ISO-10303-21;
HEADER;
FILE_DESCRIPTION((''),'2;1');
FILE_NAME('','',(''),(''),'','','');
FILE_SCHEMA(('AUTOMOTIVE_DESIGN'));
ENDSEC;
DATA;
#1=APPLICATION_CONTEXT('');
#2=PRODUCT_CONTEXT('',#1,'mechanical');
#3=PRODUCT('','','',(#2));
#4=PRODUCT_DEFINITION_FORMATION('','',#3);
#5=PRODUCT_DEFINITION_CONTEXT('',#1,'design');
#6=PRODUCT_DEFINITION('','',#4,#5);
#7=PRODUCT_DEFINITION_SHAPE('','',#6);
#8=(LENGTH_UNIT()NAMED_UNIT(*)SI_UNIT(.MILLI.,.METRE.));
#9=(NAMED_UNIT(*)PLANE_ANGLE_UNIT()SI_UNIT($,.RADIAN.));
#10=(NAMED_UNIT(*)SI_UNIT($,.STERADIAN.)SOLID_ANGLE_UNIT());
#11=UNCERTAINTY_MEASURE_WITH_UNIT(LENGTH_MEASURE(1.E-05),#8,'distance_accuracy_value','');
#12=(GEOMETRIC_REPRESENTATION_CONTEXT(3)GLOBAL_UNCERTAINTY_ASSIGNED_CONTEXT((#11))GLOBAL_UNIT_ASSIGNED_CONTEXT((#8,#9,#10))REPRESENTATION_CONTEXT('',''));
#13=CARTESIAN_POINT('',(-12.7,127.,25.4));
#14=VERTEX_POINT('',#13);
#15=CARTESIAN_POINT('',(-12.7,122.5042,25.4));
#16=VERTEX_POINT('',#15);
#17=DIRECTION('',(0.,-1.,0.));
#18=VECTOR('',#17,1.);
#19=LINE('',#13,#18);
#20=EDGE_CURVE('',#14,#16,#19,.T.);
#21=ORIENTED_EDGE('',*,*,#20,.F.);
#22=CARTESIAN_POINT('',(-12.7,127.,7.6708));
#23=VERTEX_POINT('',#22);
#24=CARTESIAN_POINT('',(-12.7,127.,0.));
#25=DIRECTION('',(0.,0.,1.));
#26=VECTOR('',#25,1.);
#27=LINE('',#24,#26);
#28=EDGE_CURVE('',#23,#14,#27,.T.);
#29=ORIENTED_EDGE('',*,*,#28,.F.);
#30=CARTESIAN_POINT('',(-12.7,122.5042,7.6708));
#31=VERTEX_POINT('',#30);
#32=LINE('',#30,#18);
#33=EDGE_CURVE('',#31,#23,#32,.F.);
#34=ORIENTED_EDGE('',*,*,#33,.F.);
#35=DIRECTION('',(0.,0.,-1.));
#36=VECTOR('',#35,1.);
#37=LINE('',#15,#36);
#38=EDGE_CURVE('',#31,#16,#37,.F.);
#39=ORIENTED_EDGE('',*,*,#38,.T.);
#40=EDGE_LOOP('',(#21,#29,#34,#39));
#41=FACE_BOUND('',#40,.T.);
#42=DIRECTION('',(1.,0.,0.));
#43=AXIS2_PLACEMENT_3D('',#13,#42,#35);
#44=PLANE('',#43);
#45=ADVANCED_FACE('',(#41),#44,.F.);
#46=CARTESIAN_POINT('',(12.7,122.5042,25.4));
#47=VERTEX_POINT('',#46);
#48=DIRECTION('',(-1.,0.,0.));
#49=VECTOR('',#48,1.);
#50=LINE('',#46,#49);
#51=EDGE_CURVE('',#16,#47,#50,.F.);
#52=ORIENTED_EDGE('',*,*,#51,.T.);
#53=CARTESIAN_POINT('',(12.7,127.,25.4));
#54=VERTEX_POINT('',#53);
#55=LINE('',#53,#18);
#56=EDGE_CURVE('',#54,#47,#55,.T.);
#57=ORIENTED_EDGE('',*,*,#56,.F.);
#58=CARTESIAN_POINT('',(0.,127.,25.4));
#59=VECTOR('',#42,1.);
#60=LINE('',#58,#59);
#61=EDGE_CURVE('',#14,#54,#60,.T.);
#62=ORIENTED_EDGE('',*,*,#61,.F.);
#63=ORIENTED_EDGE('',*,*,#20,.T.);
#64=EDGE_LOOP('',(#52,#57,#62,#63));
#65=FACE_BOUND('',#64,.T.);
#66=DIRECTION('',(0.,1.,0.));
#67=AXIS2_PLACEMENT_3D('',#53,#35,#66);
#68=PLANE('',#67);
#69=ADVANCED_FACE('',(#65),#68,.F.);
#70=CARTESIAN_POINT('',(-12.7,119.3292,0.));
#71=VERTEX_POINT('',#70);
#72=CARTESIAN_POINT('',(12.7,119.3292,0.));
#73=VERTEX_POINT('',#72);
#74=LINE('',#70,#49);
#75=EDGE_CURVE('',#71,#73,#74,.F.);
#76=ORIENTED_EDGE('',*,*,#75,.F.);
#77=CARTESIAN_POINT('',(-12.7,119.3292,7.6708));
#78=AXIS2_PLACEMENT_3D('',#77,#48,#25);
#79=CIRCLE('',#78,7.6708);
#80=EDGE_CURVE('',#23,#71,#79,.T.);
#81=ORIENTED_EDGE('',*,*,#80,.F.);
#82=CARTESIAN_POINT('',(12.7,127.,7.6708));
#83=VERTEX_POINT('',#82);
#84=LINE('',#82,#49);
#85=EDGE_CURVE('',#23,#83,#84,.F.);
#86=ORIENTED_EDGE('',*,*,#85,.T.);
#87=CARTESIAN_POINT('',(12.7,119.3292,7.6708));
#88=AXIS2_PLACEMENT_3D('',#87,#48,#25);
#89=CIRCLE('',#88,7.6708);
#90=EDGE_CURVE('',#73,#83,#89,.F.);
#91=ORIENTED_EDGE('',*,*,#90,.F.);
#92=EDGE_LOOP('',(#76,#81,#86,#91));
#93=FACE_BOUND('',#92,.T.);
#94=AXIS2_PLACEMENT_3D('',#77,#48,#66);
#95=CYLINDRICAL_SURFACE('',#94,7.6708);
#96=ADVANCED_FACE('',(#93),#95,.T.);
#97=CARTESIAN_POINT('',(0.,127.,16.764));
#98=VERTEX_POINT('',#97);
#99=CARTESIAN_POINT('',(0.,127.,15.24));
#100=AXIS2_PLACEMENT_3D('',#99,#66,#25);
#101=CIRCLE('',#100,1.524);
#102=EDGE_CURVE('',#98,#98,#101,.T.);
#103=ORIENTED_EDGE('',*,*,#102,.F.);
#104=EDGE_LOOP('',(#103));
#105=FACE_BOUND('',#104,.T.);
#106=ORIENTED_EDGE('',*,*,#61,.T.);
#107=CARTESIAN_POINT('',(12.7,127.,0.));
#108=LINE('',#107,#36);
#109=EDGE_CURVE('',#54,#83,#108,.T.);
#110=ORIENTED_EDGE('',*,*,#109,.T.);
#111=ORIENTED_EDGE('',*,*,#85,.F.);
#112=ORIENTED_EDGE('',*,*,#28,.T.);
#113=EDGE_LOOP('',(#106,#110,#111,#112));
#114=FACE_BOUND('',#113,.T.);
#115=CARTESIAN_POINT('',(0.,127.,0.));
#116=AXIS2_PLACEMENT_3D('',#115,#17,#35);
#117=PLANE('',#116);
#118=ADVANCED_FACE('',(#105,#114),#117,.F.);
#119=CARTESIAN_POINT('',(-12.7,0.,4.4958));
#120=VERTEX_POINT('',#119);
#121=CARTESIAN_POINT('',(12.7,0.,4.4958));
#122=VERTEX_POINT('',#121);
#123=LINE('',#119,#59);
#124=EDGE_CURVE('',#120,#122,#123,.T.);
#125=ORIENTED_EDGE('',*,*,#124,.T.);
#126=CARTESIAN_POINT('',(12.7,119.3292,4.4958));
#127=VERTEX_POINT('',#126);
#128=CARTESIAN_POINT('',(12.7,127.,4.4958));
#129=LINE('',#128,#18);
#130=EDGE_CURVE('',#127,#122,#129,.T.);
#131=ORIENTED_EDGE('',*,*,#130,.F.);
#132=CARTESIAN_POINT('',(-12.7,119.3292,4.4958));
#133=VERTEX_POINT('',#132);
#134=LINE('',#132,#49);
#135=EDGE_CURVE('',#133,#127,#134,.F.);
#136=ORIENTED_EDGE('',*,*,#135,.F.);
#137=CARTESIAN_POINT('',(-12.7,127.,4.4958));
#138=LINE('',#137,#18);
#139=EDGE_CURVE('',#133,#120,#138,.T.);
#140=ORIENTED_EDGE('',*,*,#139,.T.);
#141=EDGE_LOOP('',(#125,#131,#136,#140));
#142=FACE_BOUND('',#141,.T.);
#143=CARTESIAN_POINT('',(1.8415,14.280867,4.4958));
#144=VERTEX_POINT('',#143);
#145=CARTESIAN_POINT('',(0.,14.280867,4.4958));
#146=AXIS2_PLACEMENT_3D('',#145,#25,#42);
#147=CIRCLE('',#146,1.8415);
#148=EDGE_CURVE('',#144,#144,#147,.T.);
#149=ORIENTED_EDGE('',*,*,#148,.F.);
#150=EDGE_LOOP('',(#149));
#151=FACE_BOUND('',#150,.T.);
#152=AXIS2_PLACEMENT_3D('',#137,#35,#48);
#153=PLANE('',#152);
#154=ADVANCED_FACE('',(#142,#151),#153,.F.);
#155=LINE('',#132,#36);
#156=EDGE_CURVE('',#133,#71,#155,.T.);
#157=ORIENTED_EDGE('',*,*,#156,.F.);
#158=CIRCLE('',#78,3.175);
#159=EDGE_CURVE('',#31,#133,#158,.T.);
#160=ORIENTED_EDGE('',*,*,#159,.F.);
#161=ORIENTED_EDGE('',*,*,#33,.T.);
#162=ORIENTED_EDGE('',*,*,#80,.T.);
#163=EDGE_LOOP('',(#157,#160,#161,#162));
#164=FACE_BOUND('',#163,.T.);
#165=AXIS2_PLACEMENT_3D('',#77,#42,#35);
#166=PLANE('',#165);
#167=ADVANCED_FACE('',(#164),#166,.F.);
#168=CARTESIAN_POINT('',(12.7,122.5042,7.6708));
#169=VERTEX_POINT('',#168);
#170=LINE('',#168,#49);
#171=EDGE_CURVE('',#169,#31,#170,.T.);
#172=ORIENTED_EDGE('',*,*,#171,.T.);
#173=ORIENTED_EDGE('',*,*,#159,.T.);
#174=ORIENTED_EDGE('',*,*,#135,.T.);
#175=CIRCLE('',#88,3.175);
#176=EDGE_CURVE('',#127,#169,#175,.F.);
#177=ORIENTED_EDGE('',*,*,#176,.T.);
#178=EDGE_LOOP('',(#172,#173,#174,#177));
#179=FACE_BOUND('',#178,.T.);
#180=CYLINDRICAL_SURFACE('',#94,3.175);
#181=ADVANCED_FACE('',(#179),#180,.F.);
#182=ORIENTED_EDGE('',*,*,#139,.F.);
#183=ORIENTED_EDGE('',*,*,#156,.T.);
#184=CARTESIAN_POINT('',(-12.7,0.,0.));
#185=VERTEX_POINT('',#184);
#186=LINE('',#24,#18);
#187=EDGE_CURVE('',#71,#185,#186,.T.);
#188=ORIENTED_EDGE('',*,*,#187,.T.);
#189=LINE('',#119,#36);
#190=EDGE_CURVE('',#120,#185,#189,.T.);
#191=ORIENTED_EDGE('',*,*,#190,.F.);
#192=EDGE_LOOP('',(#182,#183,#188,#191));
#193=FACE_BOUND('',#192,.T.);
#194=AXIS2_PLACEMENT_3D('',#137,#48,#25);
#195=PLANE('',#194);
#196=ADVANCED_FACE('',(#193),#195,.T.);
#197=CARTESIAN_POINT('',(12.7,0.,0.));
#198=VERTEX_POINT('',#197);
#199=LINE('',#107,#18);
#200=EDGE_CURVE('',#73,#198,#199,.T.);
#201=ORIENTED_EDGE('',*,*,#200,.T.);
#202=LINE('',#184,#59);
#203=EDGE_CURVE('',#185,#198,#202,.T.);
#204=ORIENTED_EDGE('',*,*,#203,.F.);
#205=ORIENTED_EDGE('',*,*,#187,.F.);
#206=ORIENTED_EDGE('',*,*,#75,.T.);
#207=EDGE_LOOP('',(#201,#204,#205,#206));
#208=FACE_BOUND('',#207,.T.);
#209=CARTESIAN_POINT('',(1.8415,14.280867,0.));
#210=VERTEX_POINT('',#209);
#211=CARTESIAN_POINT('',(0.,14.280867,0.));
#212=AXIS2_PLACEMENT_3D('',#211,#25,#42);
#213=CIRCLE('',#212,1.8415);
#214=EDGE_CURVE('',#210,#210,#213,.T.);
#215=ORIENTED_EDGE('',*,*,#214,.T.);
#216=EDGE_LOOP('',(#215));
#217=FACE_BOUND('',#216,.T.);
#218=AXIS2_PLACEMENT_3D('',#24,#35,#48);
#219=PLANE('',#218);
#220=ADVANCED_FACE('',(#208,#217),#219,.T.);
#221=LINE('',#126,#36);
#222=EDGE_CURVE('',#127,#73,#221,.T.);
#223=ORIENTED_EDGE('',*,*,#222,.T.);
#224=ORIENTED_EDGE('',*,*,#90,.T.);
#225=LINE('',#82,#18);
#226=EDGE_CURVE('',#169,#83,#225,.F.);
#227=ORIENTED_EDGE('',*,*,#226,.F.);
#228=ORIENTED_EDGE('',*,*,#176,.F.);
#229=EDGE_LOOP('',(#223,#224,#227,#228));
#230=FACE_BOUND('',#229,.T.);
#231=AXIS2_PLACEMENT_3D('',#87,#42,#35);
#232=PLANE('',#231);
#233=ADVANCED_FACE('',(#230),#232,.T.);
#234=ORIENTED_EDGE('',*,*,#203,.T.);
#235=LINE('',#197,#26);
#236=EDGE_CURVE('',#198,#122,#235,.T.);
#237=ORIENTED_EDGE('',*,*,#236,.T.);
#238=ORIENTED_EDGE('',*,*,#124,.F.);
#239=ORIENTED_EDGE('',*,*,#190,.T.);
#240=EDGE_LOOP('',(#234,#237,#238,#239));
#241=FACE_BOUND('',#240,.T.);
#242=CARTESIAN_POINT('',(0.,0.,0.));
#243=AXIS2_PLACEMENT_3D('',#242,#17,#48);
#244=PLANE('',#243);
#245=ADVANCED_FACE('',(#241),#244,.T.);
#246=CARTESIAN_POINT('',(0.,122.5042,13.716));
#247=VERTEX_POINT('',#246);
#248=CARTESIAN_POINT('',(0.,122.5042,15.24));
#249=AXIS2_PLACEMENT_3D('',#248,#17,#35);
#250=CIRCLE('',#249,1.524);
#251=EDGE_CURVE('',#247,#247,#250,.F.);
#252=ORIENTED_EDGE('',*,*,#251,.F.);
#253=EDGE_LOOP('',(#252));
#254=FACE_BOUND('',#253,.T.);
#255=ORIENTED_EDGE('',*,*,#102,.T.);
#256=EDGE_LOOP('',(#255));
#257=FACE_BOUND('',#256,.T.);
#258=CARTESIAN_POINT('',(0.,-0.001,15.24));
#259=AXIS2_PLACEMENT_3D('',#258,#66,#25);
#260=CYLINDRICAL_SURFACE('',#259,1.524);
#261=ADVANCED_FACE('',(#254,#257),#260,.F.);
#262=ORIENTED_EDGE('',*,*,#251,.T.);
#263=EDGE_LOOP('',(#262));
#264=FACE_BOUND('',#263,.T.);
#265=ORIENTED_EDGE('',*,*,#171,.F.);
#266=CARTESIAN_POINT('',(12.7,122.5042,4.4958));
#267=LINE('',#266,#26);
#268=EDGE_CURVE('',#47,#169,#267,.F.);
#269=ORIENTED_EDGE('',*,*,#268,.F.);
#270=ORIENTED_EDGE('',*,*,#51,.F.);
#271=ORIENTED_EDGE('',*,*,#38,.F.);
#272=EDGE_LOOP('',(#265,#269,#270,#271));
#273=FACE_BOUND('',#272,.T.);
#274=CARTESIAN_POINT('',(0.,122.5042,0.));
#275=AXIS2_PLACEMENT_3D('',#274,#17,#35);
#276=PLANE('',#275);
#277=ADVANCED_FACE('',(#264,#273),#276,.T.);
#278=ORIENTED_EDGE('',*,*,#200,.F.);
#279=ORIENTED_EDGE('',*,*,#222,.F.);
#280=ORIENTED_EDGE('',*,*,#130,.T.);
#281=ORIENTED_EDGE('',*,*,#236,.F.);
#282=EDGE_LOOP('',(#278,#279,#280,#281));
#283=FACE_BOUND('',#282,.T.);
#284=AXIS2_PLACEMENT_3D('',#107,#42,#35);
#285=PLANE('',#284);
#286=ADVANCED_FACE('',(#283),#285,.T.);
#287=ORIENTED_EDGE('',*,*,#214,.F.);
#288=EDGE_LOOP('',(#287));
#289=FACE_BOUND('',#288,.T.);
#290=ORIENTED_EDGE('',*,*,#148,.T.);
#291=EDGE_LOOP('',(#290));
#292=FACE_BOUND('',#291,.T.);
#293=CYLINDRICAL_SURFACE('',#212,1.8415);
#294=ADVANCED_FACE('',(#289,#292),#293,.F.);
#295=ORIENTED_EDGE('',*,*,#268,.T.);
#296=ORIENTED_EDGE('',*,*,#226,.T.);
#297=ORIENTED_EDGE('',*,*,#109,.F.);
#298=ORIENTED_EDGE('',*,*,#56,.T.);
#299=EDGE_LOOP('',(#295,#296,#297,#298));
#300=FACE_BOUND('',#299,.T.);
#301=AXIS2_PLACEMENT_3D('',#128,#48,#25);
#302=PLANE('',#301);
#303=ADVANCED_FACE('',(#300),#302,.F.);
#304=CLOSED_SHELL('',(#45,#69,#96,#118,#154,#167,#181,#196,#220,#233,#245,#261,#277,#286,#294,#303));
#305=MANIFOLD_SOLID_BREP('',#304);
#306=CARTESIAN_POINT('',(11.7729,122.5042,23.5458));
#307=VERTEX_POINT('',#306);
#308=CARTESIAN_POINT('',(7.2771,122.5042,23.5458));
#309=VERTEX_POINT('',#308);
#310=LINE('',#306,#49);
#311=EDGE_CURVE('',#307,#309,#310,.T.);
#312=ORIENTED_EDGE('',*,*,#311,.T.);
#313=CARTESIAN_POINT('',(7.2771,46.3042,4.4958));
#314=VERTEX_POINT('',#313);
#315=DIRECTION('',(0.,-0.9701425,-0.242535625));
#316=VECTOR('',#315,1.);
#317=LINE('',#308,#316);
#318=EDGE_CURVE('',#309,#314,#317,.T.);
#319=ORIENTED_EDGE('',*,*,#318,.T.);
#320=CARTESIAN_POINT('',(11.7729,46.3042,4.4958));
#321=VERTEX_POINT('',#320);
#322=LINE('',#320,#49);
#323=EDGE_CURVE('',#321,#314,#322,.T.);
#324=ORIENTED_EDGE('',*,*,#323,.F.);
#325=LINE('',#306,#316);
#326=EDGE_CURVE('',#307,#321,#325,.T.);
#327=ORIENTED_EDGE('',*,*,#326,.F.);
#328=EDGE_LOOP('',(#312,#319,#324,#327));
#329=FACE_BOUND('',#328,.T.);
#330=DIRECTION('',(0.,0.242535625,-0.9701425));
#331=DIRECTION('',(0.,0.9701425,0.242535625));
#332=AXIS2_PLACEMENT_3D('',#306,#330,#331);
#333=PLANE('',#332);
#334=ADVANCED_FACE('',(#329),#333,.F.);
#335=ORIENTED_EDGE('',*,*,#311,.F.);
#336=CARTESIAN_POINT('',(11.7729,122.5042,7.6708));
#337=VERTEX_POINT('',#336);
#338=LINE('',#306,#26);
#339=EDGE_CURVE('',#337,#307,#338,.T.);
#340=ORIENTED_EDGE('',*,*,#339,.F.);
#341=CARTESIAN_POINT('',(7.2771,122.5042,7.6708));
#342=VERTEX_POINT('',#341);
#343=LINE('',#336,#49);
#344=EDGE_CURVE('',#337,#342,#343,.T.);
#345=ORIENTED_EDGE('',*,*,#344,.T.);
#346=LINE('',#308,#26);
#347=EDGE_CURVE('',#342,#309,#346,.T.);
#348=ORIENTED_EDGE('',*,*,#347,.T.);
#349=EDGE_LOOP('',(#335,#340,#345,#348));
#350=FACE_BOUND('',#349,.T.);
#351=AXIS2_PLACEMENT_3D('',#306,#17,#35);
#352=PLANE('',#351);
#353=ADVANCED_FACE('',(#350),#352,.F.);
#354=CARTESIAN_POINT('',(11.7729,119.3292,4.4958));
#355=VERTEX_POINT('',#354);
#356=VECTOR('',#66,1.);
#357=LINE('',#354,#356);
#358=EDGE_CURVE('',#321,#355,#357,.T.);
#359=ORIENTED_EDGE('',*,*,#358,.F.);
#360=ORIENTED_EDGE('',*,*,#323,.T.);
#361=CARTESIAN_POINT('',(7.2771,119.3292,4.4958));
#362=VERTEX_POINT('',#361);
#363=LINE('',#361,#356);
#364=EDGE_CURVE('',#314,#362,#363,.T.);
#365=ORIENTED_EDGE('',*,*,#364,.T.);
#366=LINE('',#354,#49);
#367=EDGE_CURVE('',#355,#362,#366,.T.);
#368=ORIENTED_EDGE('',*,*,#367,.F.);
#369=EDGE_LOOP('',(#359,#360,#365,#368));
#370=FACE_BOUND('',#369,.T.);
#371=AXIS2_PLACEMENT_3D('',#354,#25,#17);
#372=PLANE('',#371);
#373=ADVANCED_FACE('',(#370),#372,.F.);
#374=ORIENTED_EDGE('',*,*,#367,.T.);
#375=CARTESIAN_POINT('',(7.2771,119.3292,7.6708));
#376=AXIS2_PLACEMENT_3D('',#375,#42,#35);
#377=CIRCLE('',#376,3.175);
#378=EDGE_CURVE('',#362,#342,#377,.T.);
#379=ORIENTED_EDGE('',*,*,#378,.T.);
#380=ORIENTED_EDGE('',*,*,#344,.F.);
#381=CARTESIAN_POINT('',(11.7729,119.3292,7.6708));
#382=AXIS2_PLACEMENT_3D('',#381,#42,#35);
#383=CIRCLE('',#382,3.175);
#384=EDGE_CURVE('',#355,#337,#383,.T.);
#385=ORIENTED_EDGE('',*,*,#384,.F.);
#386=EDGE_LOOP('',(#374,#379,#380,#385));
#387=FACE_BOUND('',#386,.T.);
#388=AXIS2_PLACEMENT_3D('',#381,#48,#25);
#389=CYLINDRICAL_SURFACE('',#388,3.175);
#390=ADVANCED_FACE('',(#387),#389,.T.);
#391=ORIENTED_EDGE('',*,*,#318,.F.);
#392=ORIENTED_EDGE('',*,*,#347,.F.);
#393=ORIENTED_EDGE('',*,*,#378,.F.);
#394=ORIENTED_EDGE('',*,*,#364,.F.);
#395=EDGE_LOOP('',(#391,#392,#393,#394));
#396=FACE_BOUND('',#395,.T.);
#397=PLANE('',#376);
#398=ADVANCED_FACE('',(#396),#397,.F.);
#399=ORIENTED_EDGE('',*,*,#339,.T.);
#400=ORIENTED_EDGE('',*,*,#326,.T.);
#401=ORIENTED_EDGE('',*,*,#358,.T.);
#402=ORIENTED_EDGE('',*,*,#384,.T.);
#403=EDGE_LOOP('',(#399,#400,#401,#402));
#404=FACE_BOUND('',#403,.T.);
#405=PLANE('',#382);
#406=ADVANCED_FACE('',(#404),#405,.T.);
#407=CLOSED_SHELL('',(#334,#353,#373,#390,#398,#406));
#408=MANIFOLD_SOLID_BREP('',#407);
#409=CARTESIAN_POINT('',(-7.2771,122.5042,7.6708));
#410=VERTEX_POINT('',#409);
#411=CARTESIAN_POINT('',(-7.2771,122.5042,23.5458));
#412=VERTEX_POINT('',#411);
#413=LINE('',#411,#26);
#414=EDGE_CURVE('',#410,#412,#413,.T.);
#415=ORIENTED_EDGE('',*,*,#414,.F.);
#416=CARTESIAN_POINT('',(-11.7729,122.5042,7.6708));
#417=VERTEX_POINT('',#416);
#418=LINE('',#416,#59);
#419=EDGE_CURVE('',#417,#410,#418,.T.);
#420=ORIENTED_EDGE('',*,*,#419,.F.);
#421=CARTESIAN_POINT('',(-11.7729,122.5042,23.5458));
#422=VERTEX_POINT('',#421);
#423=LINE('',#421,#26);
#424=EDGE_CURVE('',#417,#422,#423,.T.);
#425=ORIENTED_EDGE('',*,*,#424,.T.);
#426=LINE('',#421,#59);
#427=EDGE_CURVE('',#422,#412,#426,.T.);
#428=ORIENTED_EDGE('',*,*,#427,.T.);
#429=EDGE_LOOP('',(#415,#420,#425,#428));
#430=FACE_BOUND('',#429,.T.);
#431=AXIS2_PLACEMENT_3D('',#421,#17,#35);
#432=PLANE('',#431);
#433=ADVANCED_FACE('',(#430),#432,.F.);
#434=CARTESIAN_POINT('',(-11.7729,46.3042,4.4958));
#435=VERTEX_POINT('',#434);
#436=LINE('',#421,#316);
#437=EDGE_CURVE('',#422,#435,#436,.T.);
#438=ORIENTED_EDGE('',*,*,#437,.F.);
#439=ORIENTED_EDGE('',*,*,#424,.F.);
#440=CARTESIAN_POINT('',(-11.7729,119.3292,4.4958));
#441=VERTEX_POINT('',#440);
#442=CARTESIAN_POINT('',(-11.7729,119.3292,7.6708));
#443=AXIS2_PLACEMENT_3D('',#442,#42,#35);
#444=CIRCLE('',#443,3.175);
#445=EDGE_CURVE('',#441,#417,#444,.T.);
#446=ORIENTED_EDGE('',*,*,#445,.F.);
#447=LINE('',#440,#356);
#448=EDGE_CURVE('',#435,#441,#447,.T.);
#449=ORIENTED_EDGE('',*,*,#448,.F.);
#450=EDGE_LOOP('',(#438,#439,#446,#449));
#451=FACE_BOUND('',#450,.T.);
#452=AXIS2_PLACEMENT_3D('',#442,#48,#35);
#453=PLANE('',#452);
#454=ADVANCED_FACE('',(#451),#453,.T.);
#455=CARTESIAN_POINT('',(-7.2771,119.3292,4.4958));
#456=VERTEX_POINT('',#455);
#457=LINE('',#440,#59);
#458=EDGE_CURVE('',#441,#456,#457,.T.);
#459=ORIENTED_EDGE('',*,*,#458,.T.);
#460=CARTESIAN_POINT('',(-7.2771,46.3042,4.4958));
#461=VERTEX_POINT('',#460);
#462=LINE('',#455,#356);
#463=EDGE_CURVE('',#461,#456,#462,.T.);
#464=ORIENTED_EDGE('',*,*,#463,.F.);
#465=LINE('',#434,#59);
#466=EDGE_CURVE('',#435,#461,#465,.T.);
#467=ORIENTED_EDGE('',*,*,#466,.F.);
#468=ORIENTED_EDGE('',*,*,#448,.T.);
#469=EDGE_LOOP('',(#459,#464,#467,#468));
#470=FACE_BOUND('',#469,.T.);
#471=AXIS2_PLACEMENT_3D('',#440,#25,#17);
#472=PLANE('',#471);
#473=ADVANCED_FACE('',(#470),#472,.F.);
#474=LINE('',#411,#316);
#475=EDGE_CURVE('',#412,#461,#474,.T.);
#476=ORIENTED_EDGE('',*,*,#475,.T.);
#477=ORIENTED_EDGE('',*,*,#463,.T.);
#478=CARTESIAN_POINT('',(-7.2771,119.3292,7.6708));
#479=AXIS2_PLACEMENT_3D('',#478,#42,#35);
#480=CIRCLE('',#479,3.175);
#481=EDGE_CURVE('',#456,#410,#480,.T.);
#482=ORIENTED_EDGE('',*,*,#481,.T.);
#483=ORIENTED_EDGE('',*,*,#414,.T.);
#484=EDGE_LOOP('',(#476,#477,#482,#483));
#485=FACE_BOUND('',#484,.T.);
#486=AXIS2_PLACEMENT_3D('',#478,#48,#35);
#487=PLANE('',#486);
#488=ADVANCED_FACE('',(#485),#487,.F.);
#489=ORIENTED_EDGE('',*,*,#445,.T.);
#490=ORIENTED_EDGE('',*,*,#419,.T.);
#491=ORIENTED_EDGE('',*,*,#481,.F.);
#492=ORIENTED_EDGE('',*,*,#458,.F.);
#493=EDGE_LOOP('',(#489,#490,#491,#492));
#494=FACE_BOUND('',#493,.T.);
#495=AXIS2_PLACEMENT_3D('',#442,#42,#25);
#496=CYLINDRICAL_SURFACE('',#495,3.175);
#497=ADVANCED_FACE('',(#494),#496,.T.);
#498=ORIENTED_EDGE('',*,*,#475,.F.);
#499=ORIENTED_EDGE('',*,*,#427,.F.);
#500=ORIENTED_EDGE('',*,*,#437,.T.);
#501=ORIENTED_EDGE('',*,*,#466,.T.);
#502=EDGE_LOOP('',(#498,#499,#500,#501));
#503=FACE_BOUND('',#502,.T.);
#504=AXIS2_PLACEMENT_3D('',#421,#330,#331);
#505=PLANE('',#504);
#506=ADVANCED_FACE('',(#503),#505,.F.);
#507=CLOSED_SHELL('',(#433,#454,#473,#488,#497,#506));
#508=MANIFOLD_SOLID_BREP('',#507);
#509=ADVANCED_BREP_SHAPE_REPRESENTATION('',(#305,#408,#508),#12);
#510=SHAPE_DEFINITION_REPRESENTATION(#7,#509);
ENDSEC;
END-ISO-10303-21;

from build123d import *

# Parameters (mm, degrees)
SKETCH2_W                    = 25.4
SKETCH2_H                    = 4.4958
BASE_FLANGE1_DEPTH           = 127
EDGE_FLANGE1_STRIP_W         = 24.3332
EDGE_FLANGE1_STRIP_H         = 4.4958
EDGE_FLANGE1_STRIP_CUT_DEPTH = 25.4
EDGE_FLANGE1_DEPTH           = 25.4
CUT_EXTRUDE1_REACH           = 132.136
SKETCH10_R                   = 1.524
SKETCH11_R                   = 1.8415
CUT_EXTRUDE2_DEPTH           = 130.333969156
BOSS_EXTRUDE1_START          = 9.525
BOSS_EXTRUDE1_DEPTH          = 2.2479


# Sheet-metal steps are written as plain solids
with BuildPart() as part:
    # Sketch2 → Base-Flange1 (new body)
    with BuildSketch(Plane(origin=(0, 0, 0), x_dir=(1, 0, 0), z_dir=(0, 1, 0))):
        with Locations((0, -2.2479)):
            Rectangle(SKETCH2_W, SKETCH2_H)
    extrude(amount=BASE_FLANGE1_DEPTH)

    # Edge-Flange1 strip (across the edge) → Edge-Flange1 strip cut (cut)
    with BuildSketch(Plane(origin=(12.7, 127, 4.4958), x_dir=(0, -1, 0), z_dir=(-1, 0, 0))):
        with Locations((-4.4958, -2.2479)):
            Rectangle(EDGE_FLANGE1_STRIP_W, EDGE_FLANGE1_STRIP_H)
    extrude(amount=EDGE_FLANGE1_STRIP_CUT_DEPTH, mode=Mode.SUBTRACT)

    # Edge-Flange1 section (across the edge) → Edge-Flange1 (add)
    with BuildSketch(Plane(origin=(12.7, 127, 4.4958), x_dir=(0, -1, 0), z_dir=(-1, 0, 0))):
        with BuildLine():
            Line((0, 3.175), (0, 20.9042))
            Line((0, 20.9042), (4.4958, 20.9042))
            Line((4.4958, 20.9042), (4.4958, 3.175))
            ThreePointArc((4.4958, 3.175), (5.42573597, 0.92993597), (7.6708, 0))
            Line((7.6708, 0), (7.6708, -4.4958))
            ThreePointArc((7.6708, -4.4958), (2.246725303, -2.249074697), (0, 3.175))
        make_face()
    extrude(amount=EDGE_FLANGE1_DEPTH)

    # Sketch10 → Cut-Extrude1 (cut, up to next)
    with BuildSketch(Plane(origin=(0, 127, 0), x_dir=(1, 0, 0), z_dir=(0, 1, 0)), mode=Mode.PRIVATE) as cut_extrude1_sk1:
        with Locations(Location((0, -15.24, 0), (0, 0, 270))):
            Circle(SKETCH10_R)
    cut_extrude1_tool1 = extrude(cut_extrude1_sk1.sketch, amount=-CUT_EXTRUDE1_REACH, mode=Mode.PRIVATE) & part.part
    add(cut_extrude1_tool1.solids().sort_by_distance((0, 127, 15.24))[0], mode=Mode.SUBTRACT)

    # Sketch11 → Cut-Extrude2 (cut, through all)
    with BuildSketch(Plane.XY.offset(4.4958)):
        with Locations((0, 14.280866767)):
            Circle(SKETCH11_R)
    extrude(amount=-CUT_EXTRUDE2_DEPTH, mode=Mode.SUBTRACT)


with BuildPart() as body_2:
    # Sketch12 → Boss-Extrude1 (new, symmetric)
    with BuildSketch(Plane(origin=(0, 0, 0), x_dir=(0, 0, -1), z_dir=(1, 0, 0)).offset(BOSS_EXTRUDE1_START)):
        with BuildLine():
            Line((-23.5458, 122.5042), (-4.4958, 46.3042))
            Line((-4.4958, 46.3042), (-4.4958, 119.3292))
            ThreePointArc((-4.4958, 119.3292), (-5.42573597, 121.57426403), (-7.6708, 122.5042))
            Line((-7.6708, 122.5042), (-23.5458, 122.5042))
        make_face()
    extrude(amount=BOSS_EXTRUDE1_DEPTH, both=True)


with BuildPart() as body_3:
    # Mirror2: mirrored copy
    add(body_2.part.mirror(Plane(origin=(0, 0, 0), x_dir=(0, 0, 1), z_dir=(1, 0, 0))))


solid = Compound([part.part, body_2.part, body_3.part])
